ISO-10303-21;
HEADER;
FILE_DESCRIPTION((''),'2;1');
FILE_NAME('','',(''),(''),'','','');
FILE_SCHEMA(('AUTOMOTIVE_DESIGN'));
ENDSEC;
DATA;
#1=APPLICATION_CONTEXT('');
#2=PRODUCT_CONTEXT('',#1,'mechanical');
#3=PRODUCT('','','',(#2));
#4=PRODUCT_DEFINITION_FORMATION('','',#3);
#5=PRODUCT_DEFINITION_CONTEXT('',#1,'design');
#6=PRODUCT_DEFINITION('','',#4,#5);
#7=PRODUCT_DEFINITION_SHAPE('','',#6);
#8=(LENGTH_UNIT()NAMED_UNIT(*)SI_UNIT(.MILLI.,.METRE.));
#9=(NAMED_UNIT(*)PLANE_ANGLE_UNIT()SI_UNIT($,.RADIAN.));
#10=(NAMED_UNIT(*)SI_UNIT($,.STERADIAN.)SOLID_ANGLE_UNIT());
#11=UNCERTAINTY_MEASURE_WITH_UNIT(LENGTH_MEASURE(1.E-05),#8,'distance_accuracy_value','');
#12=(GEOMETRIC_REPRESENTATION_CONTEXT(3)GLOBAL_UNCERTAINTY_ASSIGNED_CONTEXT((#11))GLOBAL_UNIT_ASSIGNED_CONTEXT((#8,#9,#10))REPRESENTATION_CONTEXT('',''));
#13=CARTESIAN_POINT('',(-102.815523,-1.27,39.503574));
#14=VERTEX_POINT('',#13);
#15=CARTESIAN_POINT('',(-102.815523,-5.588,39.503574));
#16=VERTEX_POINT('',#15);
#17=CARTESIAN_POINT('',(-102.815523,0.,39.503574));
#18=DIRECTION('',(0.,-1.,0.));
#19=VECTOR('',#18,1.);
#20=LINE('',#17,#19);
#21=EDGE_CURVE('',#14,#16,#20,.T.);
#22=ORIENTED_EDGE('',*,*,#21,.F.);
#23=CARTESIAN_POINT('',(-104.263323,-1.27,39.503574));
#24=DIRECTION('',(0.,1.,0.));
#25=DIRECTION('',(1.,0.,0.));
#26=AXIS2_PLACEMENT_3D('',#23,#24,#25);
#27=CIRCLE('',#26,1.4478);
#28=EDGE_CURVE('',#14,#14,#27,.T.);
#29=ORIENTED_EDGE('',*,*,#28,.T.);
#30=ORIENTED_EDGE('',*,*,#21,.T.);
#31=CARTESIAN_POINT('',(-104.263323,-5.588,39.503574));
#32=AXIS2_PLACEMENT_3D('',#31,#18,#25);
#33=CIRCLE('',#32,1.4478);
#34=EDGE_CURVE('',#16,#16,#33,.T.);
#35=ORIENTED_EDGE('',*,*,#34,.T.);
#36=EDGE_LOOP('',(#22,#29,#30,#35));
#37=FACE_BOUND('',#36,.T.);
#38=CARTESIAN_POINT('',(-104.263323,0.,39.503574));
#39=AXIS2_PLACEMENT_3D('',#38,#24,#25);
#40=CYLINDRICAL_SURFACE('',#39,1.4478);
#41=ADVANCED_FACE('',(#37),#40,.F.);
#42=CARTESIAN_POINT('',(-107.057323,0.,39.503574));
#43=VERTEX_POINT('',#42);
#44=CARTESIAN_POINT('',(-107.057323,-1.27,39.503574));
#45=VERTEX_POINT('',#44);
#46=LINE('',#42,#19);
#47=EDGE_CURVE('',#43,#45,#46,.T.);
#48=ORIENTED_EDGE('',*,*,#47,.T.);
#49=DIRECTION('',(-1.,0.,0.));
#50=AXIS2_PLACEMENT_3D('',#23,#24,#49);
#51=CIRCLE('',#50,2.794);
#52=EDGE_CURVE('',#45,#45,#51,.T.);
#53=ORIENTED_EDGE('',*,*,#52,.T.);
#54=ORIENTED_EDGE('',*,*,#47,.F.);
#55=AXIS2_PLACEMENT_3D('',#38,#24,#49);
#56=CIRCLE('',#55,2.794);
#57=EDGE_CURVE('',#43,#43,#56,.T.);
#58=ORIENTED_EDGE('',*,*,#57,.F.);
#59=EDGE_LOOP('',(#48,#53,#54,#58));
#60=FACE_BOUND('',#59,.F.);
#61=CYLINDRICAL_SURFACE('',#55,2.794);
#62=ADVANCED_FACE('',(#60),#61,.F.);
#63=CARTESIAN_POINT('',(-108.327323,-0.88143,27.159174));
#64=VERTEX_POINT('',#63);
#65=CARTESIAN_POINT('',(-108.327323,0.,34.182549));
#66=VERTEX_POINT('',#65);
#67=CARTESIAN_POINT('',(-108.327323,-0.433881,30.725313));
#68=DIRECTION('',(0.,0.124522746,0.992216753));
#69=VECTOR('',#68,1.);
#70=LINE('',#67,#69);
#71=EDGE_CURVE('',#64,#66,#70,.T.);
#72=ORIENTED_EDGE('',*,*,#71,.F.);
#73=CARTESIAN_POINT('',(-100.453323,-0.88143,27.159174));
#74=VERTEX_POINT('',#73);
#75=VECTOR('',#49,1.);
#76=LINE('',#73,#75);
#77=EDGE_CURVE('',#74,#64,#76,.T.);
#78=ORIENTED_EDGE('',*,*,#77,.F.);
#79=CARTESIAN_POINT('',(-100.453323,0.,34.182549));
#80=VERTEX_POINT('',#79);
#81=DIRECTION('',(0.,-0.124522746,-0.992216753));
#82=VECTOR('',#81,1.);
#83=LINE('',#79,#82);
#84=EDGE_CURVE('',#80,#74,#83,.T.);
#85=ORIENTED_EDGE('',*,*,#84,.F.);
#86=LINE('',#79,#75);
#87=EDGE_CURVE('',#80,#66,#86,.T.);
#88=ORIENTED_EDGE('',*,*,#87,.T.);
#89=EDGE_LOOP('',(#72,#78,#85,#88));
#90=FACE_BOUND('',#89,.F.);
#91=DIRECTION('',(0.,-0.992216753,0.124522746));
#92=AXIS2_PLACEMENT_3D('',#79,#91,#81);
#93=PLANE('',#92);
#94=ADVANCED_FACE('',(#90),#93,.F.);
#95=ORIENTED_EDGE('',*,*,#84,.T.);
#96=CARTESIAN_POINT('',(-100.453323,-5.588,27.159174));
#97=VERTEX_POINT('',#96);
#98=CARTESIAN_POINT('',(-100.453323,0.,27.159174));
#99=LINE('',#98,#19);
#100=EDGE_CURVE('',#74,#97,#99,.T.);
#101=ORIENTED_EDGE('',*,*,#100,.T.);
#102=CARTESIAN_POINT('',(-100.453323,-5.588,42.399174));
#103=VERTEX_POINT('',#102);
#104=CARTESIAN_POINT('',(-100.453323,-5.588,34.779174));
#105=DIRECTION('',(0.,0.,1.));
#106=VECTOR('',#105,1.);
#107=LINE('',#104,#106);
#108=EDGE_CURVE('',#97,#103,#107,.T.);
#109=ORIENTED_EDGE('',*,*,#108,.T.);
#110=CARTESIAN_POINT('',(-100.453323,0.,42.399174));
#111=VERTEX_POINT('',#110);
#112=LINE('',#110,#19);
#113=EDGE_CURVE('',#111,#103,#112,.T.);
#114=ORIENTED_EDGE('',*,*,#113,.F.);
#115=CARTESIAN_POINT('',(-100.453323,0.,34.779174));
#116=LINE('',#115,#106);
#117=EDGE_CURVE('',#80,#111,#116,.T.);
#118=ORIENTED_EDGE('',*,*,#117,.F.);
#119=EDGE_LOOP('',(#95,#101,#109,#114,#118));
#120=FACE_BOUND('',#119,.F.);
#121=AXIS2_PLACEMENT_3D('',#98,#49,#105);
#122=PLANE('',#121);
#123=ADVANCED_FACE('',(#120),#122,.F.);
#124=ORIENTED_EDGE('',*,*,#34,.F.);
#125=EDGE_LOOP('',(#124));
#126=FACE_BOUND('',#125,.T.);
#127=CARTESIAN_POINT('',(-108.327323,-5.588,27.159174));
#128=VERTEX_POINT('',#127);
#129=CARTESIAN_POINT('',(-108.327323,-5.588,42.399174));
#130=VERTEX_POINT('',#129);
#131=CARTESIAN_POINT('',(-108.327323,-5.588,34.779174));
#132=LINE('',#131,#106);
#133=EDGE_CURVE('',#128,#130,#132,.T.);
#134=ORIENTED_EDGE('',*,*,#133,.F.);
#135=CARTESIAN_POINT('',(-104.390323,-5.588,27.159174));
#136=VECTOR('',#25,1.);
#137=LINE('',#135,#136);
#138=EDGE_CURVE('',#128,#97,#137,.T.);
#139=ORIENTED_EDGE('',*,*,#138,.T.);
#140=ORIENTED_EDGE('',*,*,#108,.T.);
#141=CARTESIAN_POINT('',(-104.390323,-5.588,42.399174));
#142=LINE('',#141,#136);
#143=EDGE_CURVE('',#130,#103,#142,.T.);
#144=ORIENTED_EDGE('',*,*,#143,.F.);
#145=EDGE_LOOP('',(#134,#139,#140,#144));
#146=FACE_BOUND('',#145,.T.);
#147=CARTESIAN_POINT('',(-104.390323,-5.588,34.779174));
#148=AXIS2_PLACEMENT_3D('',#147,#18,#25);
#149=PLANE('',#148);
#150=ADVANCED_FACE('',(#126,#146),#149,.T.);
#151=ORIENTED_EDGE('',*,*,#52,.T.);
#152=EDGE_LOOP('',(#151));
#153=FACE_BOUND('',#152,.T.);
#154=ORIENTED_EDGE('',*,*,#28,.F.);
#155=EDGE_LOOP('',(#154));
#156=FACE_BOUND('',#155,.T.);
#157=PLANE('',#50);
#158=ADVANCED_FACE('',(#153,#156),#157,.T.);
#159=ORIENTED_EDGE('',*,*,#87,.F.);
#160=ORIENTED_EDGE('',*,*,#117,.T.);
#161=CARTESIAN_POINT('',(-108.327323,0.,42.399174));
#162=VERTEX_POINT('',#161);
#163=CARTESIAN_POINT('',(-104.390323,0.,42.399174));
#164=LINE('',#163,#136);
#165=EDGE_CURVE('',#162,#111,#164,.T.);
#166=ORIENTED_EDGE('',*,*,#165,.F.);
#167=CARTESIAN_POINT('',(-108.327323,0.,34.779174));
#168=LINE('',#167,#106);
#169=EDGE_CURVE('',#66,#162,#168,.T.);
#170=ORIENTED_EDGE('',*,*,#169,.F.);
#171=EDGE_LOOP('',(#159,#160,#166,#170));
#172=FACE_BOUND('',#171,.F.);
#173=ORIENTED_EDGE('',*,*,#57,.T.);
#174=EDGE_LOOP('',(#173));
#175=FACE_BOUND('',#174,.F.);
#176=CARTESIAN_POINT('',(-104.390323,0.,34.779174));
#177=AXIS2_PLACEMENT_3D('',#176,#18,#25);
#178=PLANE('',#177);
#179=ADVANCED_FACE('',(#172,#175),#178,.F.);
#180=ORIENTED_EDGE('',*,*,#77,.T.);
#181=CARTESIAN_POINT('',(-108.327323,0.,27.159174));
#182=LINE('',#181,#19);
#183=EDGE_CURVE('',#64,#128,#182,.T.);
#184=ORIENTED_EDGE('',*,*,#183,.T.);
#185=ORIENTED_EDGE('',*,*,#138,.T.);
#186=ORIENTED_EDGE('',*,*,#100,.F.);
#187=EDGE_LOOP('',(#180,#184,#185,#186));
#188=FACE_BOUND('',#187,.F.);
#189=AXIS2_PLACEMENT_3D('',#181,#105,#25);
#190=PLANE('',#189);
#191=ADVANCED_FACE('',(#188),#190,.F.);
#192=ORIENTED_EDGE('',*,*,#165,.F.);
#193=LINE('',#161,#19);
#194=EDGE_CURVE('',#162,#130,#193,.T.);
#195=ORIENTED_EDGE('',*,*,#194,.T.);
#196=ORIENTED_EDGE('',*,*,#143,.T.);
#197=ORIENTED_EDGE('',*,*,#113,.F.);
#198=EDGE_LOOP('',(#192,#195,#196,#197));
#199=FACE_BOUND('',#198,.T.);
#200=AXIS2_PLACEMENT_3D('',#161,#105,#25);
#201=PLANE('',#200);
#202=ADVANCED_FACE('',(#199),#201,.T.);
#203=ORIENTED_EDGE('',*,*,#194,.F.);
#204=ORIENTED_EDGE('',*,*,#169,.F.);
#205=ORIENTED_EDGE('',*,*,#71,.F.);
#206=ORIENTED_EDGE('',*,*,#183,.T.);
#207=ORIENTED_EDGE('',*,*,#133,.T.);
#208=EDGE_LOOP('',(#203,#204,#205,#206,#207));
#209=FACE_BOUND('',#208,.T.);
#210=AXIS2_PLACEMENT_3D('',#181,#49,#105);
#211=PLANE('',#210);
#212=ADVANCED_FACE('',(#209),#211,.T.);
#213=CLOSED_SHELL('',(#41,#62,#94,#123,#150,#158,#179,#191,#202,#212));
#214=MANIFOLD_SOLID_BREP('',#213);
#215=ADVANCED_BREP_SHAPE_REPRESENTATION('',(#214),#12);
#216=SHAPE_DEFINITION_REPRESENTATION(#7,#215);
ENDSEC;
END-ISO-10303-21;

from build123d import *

# Parameters (mm, degrees)
F0_W     = 7.874
F0_H     = 15.24
F0_R     = 1.4478
F1_DEPTH = 5.588
F2_R     = 2.794
F3_DEPTH = 1.27
F5_DEPTH = 25.4


# Not quite as in the source:
# - a feature names something its author has since deleted; it is built from what else it names


with BuildPart() as f1:
    # F0 (on Front) → F1 (new body)
    with BuildSketch(Plane.XZ):
        with Locations((-104.3903227065, 34.7791743618)):
            Rectangle(F0_W, F0_H)
        with Locations((-104.2633227065, 39.5035743618)):
            Circle(F0_R, mode=Mode.SUBTRACT)
    extrude(amount=F1_DEPTH)

    # F2 (on face) → F3 (cut)
    with BuildSketch(Plane(origin=(0, 0, 0), x_dir=(-1, 0, 0), z_dir=(0, 1, 0))):
        with Locations((104.2633227065, 39.5035743618)):
            Circle(F2_R)
    extrude(amount=-F3_DEPTH, mode=Mode.SUBTRACT)

    # F4 (on face) → F5 (cut)
    with BuildSketch(Plane.YZ.offset(-100.4533227065)):
        Polygon((0, 34.1825485229), (-0.8814302273, 27.1591743618), (0, 27.1591743618), align=None)
    extrude(amount=-F5_DEPTH, mode=Mode.SUBTRACT)


solid = f1.part
